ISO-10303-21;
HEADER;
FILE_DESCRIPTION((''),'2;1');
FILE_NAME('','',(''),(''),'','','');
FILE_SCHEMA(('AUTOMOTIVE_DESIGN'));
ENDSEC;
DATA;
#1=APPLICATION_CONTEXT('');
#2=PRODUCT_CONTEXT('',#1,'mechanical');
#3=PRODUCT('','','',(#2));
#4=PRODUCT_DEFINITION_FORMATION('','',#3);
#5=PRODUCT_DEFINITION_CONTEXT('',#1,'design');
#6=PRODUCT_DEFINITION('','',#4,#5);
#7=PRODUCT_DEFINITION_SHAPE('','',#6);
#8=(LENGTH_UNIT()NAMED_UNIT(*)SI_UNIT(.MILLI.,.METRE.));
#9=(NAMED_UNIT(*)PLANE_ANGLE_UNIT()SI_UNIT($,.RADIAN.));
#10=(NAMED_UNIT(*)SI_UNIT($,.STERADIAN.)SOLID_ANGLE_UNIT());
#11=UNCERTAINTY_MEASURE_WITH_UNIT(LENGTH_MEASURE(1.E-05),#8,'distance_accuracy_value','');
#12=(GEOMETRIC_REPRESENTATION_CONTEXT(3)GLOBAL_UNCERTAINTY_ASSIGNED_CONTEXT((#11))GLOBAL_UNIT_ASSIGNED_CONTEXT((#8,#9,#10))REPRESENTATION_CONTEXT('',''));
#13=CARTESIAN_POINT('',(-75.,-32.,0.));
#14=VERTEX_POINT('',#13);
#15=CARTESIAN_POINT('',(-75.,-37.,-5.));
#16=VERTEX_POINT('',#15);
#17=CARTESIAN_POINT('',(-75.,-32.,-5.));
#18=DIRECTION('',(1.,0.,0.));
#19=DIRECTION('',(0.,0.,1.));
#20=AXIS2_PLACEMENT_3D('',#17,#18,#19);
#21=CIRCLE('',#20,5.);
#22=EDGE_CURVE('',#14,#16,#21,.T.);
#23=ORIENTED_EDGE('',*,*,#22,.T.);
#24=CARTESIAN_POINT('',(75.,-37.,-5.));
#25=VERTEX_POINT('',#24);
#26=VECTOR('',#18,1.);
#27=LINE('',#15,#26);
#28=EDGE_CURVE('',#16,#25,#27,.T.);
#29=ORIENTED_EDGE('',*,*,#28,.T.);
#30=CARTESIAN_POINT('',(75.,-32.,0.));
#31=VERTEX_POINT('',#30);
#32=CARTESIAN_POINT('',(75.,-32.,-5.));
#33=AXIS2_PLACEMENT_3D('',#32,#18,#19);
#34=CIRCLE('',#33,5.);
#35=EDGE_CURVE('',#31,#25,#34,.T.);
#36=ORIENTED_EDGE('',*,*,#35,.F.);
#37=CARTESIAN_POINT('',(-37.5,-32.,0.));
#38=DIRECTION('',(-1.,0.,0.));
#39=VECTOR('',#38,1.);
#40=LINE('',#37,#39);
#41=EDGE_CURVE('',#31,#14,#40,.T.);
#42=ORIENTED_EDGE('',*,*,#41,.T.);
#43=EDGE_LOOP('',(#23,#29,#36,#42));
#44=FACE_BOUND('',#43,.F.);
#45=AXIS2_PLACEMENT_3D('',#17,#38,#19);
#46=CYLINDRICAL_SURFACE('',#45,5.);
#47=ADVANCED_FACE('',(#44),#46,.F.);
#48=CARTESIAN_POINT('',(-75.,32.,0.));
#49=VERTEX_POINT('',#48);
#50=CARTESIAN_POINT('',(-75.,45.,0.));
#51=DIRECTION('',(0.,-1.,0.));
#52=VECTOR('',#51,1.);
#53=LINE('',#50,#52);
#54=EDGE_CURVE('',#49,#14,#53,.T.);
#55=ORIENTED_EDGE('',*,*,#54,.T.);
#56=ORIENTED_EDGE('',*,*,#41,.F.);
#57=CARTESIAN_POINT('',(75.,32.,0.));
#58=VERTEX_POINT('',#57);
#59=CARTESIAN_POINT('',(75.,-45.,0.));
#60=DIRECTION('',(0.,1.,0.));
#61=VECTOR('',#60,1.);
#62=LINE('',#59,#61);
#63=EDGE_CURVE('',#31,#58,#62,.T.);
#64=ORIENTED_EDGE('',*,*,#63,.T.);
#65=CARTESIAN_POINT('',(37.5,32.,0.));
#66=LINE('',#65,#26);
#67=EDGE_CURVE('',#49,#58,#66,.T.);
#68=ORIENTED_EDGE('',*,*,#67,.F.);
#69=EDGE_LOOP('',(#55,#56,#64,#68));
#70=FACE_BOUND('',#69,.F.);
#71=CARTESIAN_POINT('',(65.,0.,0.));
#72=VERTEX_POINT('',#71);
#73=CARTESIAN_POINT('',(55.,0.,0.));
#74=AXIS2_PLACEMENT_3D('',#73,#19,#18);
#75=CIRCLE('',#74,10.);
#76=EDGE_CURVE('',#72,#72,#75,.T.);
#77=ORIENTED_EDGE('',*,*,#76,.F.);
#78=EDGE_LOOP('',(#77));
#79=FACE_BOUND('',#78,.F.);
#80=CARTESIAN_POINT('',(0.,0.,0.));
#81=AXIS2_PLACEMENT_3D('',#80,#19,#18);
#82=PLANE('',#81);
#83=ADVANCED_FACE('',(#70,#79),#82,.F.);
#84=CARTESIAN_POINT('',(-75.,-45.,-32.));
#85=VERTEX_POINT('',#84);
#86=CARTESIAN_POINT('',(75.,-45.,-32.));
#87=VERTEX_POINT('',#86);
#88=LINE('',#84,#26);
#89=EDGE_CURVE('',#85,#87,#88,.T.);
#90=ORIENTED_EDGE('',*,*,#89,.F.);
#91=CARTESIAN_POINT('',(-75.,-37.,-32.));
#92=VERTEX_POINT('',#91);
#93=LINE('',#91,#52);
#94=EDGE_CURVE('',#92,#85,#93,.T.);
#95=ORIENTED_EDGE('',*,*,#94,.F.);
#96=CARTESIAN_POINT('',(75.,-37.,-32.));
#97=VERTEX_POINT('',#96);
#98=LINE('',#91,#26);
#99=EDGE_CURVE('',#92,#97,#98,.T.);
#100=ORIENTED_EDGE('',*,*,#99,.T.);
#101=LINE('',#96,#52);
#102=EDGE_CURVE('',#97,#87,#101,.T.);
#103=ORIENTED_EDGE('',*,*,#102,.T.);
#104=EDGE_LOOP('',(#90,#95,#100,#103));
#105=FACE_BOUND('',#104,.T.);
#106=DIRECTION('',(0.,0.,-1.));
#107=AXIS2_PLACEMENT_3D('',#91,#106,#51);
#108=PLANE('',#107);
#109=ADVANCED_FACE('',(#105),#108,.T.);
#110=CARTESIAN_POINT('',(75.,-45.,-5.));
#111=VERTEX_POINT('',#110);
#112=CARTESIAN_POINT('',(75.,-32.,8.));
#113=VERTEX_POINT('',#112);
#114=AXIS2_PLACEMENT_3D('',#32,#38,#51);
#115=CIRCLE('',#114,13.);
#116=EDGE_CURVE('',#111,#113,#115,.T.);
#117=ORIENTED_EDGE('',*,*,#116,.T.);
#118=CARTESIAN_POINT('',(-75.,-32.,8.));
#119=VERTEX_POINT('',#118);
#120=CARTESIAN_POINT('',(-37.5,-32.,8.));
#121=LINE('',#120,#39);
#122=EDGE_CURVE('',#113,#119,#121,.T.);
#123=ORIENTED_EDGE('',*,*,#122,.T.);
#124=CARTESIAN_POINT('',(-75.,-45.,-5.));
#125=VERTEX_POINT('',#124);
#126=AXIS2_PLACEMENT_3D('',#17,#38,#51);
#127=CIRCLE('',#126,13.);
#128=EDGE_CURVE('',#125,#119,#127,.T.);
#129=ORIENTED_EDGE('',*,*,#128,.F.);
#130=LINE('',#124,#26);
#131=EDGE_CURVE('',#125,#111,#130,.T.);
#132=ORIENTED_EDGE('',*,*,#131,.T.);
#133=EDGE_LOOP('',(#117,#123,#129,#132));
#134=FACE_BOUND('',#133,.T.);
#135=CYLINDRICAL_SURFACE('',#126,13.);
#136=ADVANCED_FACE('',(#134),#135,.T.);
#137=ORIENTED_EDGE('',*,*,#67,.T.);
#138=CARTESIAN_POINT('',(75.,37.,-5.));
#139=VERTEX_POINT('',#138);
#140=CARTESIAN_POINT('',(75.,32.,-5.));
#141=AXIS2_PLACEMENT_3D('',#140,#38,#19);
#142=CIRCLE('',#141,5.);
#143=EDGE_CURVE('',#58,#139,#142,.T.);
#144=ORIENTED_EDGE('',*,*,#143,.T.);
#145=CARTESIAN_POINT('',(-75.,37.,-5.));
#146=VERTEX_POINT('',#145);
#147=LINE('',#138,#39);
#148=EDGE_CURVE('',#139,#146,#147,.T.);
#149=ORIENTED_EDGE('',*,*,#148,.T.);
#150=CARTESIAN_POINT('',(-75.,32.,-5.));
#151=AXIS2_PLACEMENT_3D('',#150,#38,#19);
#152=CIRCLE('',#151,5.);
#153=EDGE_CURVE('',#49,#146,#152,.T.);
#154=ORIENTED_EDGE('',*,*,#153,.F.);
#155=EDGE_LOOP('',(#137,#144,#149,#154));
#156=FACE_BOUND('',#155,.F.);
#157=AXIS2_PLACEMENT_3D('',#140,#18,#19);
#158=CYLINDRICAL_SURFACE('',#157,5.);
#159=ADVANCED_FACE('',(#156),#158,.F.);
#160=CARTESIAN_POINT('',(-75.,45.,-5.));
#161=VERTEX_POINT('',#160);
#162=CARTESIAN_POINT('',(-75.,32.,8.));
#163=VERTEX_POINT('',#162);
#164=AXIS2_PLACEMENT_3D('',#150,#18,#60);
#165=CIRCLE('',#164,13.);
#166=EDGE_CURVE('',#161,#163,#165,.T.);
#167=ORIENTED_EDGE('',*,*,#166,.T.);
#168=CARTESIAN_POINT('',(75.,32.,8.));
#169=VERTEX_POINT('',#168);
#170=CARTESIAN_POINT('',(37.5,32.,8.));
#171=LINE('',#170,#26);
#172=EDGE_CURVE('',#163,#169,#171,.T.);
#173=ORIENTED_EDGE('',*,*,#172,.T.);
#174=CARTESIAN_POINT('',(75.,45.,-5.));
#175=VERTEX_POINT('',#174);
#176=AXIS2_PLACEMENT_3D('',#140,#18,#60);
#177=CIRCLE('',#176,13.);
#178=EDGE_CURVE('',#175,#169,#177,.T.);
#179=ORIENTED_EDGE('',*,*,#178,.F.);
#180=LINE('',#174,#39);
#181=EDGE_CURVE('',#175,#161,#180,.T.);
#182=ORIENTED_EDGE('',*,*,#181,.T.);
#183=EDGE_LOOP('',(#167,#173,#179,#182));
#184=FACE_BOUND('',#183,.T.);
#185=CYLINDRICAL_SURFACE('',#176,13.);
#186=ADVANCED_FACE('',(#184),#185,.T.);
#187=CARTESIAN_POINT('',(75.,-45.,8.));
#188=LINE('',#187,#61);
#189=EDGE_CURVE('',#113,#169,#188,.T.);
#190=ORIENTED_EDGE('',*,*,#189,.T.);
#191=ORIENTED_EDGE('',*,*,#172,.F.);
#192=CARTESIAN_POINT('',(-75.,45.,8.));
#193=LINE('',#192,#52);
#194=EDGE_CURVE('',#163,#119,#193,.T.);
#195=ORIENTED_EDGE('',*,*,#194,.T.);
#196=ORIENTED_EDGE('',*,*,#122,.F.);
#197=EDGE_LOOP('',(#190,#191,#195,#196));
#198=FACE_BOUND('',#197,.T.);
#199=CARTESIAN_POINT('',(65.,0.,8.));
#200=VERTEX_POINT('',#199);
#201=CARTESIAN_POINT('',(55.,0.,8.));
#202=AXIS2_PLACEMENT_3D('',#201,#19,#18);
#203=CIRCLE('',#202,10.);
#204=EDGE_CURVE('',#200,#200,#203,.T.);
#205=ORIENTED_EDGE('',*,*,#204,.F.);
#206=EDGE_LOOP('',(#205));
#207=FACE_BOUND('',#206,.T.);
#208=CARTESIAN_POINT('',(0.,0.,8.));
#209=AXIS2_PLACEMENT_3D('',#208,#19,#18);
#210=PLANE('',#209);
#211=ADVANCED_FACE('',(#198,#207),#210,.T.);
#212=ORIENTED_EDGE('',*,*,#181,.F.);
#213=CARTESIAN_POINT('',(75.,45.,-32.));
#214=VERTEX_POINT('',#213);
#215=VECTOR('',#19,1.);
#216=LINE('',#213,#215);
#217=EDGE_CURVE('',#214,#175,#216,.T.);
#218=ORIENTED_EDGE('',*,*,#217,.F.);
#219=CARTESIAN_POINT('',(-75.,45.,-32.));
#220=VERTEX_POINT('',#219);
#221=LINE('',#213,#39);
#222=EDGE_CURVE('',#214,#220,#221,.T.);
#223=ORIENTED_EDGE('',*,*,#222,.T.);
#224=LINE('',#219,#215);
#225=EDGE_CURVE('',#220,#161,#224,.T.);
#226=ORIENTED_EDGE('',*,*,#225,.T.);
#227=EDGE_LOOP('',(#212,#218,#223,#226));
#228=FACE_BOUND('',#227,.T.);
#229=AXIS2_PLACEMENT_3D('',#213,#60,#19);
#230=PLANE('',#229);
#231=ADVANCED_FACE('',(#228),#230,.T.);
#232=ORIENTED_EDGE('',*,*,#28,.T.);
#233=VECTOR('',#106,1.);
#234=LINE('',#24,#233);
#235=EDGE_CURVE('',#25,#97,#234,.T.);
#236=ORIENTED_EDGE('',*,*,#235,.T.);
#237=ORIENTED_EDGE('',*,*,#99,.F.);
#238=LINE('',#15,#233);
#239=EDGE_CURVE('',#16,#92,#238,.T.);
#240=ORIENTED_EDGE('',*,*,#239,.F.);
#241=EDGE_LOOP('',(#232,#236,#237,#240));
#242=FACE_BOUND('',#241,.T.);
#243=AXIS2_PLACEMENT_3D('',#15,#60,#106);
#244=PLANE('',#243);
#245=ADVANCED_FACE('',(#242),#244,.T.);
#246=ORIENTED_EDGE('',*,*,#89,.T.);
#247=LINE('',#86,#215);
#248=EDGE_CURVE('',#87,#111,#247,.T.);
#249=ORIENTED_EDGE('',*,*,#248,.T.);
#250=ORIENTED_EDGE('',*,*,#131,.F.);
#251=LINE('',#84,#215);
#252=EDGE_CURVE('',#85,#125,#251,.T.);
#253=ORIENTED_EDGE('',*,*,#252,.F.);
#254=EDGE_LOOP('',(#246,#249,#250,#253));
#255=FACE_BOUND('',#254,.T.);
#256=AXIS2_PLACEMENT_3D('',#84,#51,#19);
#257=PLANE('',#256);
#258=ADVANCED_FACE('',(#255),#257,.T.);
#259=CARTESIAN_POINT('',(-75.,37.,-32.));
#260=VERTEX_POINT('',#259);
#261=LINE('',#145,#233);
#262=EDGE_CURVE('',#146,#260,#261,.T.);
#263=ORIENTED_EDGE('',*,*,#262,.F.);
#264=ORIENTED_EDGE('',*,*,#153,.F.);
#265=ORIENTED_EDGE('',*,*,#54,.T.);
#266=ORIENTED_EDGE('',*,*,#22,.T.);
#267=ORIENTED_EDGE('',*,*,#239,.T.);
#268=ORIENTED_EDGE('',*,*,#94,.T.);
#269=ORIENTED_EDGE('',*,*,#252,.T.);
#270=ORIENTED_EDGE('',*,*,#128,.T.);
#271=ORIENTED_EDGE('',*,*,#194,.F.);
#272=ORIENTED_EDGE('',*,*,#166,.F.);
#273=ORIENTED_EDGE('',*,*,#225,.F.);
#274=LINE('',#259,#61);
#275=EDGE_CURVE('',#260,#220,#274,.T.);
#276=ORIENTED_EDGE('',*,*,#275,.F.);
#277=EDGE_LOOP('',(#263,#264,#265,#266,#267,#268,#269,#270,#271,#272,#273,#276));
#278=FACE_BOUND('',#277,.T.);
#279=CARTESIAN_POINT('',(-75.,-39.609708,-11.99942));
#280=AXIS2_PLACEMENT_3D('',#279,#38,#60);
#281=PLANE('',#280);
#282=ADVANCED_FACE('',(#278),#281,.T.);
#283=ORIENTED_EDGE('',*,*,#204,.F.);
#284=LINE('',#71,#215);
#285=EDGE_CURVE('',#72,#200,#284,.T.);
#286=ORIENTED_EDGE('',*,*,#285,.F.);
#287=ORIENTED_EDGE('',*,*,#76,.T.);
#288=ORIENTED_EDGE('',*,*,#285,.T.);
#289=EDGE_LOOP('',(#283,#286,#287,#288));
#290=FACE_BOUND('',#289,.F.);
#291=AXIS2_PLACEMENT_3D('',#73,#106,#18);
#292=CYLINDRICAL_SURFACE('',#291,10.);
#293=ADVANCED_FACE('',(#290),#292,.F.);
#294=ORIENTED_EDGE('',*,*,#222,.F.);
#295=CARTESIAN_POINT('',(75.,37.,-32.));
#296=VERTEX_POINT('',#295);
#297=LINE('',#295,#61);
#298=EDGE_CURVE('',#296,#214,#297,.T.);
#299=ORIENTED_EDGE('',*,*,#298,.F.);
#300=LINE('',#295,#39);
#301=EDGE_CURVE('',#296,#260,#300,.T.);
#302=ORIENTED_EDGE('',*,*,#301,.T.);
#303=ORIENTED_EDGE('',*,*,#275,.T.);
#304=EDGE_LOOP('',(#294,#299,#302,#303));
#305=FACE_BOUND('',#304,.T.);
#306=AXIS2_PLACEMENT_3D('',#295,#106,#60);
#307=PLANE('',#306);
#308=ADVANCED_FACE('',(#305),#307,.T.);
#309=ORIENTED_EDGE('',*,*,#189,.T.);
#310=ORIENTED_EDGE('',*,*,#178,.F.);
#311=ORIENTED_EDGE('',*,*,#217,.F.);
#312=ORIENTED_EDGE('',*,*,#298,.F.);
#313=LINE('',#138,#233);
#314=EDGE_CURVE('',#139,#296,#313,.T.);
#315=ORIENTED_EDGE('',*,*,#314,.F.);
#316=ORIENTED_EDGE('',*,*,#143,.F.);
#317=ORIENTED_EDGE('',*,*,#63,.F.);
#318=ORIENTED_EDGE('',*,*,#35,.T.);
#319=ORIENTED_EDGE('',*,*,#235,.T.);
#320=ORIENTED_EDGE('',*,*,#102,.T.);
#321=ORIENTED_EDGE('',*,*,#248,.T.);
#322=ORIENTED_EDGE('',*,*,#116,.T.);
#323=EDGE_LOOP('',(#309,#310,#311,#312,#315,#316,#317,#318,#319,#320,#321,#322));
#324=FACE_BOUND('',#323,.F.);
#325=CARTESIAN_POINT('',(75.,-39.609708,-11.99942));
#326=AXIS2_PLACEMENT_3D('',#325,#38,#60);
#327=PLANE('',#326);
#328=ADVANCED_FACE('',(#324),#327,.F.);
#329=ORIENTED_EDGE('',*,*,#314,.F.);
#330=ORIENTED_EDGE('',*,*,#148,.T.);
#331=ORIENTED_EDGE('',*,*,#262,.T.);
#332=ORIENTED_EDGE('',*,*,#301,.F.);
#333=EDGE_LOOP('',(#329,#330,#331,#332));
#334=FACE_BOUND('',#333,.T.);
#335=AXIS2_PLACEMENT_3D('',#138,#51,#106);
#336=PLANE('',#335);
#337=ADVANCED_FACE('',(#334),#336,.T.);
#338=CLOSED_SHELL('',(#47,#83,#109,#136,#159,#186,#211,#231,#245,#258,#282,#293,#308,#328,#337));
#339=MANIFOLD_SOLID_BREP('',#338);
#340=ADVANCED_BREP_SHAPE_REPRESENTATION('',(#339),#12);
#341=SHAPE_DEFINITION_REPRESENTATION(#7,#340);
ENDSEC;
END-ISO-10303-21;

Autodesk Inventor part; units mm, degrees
ref_plane "YZ Plane" through (0, 0, 0) normal (1, 0, 0) x (0, 1, 0)
ref_plane "XZ Plane" through (0, 0, 0) normal (0, 1, 0) x (-1, 0, 0)
ref_plane "XY Plane" through (0, 0, 0) normal (0, 0, 1) x (1, 0, 0)
sketch "Sketch1" plane through (0, 0, 0) normal (0, 0, 1) x (1, 0, 0)
  line L0 (-75, -45) -> (75, -45)
  line L1 (75, -45) -> (75, 45)
  line L2 (75, 45) -> (-75, 45)
  line L3 (-75, 45) -> (-75, -45)
  line L4 (-75, -45) -> (75, 45) construction
  line L5 (75, -45) -> (-75, 45) construction
  circle A0 centre (55, -25) radius 10
  circle A1 centre (55, 25) radius 10
  line L6 (0, 0) -> (75, 0) construction
  circle A2 centre (55, 0) radius 10
  dimension "d0" = 150
  dimension "d1" = 90
  dimension "d23" = 20
  dimension "d25" = 20
  dimension "d26" = 20
extrude "Plate1" add sketch "Sketch1" along normal blind 8 contours L3 L2 L1 L0 | A0 | A1
sketch "Sketch6" plane through (-75, -37, 8) normal (0, -1, 0) x (1, 0, 0)
  line L0 (150, 0) -> (0, 0)
  line L1 (0, 0) -> (0, -40)
  line L2 (0, -40) -> (150, -40)
  line L3 (150, -40) -> (150, 0)
edge flange "Flange2" height 40 angle 90 thickness 8 bend radius 5 thickness toward (0, -1, 0) relief round relief width 8 relief depth 4 corner gap 5 corner form 0 edges at (0, -45, 0) (0, 45, 0) wall of the first edge with corners at (75, -37, 8) (-75, -37, 8) (-75, -37, -32) (75, -37, -32)
bend "Bend2"
corner "Corner2"
equation "\"d26\" = d25"
equation "\"d2\" = Thickness"
equation "\"d30\" = BendReliefWidth"
equation "\"d31\" = BendReliefDepth"
equation "\"d32\" = MinimumRemnant"
equation "\"d33\" = TransitionRadius"
equation "\"d36\" = BendRadius"
equation "\"d37\" = CornerReliefSize"
equation "\"d38\" = GapSize"
equation "\"d39\" = JacobiRadiusSize"
equation "\"BendReliefWidth\" = Thickness"
equation "\"BendReliefDepth\" = 0.5 * Thickness"
equation "\"CornerReliefSize\" = 4 * Thickness"
equation "\"MinimumRemnant\" = 2 * Thickness"
equation "\"TransitionRadius\" = BendRadius"
equation "\"JacobiRadiusSize\" = BendRadius"
equation "\"GapSize\" = Thickness"
equation "\"Thickness\" = 8"
equation "\"BendRadius\" = 5"
properties part number "PRS 9785 leg floor channel_1200" material "Steel"
